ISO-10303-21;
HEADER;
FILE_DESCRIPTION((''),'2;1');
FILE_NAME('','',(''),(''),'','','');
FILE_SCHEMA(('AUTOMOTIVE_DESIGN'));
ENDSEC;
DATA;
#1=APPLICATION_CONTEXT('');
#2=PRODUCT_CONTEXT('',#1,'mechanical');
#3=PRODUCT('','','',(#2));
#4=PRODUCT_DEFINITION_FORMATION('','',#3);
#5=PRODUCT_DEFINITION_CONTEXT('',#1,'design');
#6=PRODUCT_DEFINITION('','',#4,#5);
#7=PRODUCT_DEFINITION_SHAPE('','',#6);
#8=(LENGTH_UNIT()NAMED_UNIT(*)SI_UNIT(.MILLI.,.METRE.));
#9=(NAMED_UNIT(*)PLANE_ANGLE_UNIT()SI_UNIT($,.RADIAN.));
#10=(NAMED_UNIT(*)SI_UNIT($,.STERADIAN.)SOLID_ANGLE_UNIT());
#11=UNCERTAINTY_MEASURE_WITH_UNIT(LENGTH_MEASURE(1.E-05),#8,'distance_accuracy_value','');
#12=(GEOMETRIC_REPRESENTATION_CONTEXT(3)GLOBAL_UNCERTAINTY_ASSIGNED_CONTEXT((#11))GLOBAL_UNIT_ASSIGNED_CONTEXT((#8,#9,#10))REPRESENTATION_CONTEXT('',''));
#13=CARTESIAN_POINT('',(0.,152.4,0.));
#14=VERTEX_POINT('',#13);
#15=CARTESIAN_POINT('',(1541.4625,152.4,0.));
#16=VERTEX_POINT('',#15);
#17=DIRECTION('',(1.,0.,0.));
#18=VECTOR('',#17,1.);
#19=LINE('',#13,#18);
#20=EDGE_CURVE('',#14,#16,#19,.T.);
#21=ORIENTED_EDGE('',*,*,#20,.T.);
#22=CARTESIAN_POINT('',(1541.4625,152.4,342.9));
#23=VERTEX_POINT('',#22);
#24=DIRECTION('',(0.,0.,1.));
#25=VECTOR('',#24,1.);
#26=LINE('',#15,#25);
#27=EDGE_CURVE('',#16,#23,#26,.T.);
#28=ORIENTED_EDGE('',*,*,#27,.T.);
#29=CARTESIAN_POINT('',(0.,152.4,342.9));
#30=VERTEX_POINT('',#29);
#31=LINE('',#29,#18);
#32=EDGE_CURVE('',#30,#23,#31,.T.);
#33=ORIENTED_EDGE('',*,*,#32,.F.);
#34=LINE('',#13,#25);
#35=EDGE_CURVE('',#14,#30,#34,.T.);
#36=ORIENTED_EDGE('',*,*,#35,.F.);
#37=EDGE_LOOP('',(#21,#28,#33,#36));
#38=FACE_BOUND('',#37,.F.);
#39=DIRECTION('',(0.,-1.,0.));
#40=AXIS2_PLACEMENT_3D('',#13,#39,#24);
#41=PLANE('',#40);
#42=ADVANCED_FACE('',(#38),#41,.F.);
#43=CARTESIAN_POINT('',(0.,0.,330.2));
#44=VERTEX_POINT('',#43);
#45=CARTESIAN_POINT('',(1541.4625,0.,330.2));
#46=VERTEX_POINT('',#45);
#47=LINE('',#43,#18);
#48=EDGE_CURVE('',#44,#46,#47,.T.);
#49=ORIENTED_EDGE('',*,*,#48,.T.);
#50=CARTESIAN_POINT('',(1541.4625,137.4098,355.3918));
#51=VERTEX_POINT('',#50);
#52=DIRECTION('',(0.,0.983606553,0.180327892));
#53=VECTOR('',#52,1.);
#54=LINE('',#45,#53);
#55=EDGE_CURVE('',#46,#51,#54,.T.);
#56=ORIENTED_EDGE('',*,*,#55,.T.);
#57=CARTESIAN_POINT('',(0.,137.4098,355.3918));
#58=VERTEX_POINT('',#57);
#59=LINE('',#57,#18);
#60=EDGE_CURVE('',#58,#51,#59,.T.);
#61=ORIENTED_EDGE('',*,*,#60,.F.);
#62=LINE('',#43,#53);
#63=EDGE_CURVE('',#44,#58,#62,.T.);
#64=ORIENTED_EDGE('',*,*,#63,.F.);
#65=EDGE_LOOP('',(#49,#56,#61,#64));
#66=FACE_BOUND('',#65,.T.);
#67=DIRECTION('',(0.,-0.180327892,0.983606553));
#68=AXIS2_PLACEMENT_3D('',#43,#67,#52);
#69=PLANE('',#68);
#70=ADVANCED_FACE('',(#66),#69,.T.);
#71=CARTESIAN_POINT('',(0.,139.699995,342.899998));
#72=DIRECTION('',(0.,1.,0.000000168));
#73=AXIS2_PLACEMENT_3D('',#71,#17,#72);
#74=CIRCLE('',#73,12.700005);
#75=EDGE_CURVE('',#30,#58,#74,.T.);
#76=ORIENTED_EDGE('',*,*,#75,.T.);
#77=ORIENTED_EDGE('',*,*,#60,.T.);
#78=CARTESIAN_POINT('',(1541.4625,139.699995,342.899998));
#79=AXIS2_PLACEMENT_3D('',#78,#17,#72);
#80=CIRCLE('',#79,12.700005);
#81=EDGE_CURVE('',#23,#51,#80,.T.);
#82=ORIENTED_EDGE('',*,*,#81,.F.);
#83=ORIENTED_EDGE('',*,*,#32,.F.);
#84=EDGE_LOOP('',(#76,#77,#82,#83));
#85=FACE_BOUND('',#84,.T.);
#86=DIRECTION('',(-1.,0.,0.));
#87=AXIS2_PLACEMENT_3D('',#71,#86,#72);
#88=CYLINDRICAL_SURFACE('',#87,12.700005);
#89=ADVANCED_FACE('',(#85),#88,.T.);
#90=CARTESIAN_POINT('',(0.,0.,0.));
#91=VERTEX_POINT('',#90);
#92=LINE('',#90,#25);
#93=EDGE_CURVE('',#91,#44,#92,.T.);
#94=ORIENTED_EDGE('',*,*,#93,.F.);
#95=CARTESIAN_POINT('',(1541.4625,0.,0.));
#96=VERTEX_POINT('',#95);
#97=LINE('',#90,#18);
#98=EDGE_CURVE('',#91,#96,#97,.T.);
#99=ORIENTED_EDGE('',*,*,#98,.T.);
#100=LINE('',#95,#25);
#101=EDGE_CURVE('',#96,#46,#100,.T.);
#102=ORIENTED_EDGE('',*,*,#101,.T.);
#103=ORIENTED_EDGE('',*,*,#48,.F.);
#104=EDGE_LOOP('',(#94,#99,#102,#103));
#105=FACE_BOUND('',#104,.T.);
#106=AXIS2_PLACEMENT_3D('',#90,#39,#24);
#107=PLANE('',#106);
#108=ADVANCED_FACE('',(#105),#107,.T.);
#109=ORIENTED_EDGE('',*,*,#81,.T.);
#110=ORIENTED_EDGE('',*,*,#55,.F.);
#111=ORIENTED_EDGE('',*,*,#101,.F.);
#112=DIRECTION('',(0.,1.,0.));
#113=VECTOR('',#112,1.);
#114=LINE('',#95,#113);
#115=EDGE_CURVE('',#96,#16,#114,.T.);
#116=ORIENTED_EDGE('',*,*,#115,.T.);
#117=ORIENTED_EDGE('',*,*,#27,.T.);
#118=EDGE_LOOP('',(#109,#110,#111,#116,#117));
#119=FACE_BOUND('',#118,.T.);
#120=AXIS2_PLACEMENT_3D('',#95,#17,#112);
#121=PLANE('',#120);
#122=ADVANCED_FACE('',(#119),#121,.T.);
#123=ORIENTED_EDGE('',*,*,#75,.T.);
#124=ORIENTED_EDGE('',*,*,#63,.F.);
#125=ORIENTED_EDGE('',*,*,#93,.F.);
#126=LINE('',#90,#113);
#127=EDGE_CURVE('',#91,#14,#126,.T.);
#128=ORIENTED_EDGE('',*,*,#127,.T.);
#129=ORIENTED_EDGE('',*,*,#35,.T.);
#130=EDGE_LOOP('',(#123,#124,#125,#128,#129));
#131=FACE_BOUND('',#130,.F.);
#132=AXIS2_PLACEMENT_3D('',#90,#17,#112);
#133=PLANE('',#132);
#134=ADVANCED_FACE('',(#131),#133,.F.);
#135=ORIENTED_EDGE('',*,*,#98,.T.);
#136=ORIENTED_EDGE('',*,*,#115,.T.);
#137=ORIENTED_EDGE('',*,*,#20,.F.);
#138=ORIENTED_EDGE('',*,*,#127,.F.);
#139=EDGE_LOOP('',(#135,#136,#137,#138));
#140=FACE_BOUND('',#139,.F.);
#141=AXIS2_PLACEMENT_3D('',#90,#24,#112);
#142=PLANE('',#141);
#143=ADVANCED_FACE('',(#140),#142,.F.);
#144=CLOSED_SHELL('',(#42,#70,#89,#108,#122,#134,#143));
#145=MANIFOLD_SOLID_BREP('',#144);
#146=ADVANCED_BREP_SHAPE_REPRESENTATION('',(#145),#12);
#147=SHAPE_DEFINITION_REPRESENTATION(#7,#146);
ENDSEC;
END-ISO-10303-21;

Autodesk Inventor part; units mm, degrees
ref_plane "YZ Plane" through (0, 0, 0) normal (1, 0, 0) x (0, 1, 0)
ref_plane "XZ Plane" through (0, 0, 0) normal (0, 1, 0) x (-1, 0, 0)
ref_plane "XY Plane" through (0, 0, 0) normal (0, 0, 1) x (1, 0, 0)
sketch "Profile" plane through (0, 0, 0) normal (0, 0, 1) x (1, 0, 0)
  line L0 (0, 0) -> (0, 330.2)
  line L1 (0, 0) -> (152.4, 0)
  line L2 (152.4, 0) -> (152.4, 342.9)
  line L3 (152.4, 342.9) -> (139.7, 342.9) construction
  line L4 (152.4, 342.9) -> (139.7, 342.9) construction
  arc A0 (152.4, 342.9) -> (137.4098, 355.3918) centre (139.7, 342.9) ccw
  line L5 (0, 330.2) -> (137.4098, 355.3918)
  dimension "d0" = 330.2
  dimension "d1" = 152.4
  dimension "d2" = 342.9
  dimension "d3" = 12.7
  dimension "d4" = 12.7
sketch "Sketch1" plane through (0, 0, 0) normal (1, 0, 0) x (0, 1, 0)
  line L0 (0, 0) -> (0, 330.2)
  line L1 (0, 0) -> (152.4, 0)
  line L2 (152.4, 0) -> (152.4, 342.9)
  line L3 (152.4, 342.9) -> (139.7, 342.9) construction
  line L4 (152.4, 342.9) -> (139.7, 342.9) construction
  arc A0 (152.4, 342.9) -> (137.4098, 355.3918) centre (139.7, 342.9) ccw
  line L5 (0, 330.2) -> (137.4098, 355.3918)
extrude "Extrusion1" add sketch "Sketch1" along normal blind 1541.4625
properties part number "Q" material "Granite, Cut, Polished"
